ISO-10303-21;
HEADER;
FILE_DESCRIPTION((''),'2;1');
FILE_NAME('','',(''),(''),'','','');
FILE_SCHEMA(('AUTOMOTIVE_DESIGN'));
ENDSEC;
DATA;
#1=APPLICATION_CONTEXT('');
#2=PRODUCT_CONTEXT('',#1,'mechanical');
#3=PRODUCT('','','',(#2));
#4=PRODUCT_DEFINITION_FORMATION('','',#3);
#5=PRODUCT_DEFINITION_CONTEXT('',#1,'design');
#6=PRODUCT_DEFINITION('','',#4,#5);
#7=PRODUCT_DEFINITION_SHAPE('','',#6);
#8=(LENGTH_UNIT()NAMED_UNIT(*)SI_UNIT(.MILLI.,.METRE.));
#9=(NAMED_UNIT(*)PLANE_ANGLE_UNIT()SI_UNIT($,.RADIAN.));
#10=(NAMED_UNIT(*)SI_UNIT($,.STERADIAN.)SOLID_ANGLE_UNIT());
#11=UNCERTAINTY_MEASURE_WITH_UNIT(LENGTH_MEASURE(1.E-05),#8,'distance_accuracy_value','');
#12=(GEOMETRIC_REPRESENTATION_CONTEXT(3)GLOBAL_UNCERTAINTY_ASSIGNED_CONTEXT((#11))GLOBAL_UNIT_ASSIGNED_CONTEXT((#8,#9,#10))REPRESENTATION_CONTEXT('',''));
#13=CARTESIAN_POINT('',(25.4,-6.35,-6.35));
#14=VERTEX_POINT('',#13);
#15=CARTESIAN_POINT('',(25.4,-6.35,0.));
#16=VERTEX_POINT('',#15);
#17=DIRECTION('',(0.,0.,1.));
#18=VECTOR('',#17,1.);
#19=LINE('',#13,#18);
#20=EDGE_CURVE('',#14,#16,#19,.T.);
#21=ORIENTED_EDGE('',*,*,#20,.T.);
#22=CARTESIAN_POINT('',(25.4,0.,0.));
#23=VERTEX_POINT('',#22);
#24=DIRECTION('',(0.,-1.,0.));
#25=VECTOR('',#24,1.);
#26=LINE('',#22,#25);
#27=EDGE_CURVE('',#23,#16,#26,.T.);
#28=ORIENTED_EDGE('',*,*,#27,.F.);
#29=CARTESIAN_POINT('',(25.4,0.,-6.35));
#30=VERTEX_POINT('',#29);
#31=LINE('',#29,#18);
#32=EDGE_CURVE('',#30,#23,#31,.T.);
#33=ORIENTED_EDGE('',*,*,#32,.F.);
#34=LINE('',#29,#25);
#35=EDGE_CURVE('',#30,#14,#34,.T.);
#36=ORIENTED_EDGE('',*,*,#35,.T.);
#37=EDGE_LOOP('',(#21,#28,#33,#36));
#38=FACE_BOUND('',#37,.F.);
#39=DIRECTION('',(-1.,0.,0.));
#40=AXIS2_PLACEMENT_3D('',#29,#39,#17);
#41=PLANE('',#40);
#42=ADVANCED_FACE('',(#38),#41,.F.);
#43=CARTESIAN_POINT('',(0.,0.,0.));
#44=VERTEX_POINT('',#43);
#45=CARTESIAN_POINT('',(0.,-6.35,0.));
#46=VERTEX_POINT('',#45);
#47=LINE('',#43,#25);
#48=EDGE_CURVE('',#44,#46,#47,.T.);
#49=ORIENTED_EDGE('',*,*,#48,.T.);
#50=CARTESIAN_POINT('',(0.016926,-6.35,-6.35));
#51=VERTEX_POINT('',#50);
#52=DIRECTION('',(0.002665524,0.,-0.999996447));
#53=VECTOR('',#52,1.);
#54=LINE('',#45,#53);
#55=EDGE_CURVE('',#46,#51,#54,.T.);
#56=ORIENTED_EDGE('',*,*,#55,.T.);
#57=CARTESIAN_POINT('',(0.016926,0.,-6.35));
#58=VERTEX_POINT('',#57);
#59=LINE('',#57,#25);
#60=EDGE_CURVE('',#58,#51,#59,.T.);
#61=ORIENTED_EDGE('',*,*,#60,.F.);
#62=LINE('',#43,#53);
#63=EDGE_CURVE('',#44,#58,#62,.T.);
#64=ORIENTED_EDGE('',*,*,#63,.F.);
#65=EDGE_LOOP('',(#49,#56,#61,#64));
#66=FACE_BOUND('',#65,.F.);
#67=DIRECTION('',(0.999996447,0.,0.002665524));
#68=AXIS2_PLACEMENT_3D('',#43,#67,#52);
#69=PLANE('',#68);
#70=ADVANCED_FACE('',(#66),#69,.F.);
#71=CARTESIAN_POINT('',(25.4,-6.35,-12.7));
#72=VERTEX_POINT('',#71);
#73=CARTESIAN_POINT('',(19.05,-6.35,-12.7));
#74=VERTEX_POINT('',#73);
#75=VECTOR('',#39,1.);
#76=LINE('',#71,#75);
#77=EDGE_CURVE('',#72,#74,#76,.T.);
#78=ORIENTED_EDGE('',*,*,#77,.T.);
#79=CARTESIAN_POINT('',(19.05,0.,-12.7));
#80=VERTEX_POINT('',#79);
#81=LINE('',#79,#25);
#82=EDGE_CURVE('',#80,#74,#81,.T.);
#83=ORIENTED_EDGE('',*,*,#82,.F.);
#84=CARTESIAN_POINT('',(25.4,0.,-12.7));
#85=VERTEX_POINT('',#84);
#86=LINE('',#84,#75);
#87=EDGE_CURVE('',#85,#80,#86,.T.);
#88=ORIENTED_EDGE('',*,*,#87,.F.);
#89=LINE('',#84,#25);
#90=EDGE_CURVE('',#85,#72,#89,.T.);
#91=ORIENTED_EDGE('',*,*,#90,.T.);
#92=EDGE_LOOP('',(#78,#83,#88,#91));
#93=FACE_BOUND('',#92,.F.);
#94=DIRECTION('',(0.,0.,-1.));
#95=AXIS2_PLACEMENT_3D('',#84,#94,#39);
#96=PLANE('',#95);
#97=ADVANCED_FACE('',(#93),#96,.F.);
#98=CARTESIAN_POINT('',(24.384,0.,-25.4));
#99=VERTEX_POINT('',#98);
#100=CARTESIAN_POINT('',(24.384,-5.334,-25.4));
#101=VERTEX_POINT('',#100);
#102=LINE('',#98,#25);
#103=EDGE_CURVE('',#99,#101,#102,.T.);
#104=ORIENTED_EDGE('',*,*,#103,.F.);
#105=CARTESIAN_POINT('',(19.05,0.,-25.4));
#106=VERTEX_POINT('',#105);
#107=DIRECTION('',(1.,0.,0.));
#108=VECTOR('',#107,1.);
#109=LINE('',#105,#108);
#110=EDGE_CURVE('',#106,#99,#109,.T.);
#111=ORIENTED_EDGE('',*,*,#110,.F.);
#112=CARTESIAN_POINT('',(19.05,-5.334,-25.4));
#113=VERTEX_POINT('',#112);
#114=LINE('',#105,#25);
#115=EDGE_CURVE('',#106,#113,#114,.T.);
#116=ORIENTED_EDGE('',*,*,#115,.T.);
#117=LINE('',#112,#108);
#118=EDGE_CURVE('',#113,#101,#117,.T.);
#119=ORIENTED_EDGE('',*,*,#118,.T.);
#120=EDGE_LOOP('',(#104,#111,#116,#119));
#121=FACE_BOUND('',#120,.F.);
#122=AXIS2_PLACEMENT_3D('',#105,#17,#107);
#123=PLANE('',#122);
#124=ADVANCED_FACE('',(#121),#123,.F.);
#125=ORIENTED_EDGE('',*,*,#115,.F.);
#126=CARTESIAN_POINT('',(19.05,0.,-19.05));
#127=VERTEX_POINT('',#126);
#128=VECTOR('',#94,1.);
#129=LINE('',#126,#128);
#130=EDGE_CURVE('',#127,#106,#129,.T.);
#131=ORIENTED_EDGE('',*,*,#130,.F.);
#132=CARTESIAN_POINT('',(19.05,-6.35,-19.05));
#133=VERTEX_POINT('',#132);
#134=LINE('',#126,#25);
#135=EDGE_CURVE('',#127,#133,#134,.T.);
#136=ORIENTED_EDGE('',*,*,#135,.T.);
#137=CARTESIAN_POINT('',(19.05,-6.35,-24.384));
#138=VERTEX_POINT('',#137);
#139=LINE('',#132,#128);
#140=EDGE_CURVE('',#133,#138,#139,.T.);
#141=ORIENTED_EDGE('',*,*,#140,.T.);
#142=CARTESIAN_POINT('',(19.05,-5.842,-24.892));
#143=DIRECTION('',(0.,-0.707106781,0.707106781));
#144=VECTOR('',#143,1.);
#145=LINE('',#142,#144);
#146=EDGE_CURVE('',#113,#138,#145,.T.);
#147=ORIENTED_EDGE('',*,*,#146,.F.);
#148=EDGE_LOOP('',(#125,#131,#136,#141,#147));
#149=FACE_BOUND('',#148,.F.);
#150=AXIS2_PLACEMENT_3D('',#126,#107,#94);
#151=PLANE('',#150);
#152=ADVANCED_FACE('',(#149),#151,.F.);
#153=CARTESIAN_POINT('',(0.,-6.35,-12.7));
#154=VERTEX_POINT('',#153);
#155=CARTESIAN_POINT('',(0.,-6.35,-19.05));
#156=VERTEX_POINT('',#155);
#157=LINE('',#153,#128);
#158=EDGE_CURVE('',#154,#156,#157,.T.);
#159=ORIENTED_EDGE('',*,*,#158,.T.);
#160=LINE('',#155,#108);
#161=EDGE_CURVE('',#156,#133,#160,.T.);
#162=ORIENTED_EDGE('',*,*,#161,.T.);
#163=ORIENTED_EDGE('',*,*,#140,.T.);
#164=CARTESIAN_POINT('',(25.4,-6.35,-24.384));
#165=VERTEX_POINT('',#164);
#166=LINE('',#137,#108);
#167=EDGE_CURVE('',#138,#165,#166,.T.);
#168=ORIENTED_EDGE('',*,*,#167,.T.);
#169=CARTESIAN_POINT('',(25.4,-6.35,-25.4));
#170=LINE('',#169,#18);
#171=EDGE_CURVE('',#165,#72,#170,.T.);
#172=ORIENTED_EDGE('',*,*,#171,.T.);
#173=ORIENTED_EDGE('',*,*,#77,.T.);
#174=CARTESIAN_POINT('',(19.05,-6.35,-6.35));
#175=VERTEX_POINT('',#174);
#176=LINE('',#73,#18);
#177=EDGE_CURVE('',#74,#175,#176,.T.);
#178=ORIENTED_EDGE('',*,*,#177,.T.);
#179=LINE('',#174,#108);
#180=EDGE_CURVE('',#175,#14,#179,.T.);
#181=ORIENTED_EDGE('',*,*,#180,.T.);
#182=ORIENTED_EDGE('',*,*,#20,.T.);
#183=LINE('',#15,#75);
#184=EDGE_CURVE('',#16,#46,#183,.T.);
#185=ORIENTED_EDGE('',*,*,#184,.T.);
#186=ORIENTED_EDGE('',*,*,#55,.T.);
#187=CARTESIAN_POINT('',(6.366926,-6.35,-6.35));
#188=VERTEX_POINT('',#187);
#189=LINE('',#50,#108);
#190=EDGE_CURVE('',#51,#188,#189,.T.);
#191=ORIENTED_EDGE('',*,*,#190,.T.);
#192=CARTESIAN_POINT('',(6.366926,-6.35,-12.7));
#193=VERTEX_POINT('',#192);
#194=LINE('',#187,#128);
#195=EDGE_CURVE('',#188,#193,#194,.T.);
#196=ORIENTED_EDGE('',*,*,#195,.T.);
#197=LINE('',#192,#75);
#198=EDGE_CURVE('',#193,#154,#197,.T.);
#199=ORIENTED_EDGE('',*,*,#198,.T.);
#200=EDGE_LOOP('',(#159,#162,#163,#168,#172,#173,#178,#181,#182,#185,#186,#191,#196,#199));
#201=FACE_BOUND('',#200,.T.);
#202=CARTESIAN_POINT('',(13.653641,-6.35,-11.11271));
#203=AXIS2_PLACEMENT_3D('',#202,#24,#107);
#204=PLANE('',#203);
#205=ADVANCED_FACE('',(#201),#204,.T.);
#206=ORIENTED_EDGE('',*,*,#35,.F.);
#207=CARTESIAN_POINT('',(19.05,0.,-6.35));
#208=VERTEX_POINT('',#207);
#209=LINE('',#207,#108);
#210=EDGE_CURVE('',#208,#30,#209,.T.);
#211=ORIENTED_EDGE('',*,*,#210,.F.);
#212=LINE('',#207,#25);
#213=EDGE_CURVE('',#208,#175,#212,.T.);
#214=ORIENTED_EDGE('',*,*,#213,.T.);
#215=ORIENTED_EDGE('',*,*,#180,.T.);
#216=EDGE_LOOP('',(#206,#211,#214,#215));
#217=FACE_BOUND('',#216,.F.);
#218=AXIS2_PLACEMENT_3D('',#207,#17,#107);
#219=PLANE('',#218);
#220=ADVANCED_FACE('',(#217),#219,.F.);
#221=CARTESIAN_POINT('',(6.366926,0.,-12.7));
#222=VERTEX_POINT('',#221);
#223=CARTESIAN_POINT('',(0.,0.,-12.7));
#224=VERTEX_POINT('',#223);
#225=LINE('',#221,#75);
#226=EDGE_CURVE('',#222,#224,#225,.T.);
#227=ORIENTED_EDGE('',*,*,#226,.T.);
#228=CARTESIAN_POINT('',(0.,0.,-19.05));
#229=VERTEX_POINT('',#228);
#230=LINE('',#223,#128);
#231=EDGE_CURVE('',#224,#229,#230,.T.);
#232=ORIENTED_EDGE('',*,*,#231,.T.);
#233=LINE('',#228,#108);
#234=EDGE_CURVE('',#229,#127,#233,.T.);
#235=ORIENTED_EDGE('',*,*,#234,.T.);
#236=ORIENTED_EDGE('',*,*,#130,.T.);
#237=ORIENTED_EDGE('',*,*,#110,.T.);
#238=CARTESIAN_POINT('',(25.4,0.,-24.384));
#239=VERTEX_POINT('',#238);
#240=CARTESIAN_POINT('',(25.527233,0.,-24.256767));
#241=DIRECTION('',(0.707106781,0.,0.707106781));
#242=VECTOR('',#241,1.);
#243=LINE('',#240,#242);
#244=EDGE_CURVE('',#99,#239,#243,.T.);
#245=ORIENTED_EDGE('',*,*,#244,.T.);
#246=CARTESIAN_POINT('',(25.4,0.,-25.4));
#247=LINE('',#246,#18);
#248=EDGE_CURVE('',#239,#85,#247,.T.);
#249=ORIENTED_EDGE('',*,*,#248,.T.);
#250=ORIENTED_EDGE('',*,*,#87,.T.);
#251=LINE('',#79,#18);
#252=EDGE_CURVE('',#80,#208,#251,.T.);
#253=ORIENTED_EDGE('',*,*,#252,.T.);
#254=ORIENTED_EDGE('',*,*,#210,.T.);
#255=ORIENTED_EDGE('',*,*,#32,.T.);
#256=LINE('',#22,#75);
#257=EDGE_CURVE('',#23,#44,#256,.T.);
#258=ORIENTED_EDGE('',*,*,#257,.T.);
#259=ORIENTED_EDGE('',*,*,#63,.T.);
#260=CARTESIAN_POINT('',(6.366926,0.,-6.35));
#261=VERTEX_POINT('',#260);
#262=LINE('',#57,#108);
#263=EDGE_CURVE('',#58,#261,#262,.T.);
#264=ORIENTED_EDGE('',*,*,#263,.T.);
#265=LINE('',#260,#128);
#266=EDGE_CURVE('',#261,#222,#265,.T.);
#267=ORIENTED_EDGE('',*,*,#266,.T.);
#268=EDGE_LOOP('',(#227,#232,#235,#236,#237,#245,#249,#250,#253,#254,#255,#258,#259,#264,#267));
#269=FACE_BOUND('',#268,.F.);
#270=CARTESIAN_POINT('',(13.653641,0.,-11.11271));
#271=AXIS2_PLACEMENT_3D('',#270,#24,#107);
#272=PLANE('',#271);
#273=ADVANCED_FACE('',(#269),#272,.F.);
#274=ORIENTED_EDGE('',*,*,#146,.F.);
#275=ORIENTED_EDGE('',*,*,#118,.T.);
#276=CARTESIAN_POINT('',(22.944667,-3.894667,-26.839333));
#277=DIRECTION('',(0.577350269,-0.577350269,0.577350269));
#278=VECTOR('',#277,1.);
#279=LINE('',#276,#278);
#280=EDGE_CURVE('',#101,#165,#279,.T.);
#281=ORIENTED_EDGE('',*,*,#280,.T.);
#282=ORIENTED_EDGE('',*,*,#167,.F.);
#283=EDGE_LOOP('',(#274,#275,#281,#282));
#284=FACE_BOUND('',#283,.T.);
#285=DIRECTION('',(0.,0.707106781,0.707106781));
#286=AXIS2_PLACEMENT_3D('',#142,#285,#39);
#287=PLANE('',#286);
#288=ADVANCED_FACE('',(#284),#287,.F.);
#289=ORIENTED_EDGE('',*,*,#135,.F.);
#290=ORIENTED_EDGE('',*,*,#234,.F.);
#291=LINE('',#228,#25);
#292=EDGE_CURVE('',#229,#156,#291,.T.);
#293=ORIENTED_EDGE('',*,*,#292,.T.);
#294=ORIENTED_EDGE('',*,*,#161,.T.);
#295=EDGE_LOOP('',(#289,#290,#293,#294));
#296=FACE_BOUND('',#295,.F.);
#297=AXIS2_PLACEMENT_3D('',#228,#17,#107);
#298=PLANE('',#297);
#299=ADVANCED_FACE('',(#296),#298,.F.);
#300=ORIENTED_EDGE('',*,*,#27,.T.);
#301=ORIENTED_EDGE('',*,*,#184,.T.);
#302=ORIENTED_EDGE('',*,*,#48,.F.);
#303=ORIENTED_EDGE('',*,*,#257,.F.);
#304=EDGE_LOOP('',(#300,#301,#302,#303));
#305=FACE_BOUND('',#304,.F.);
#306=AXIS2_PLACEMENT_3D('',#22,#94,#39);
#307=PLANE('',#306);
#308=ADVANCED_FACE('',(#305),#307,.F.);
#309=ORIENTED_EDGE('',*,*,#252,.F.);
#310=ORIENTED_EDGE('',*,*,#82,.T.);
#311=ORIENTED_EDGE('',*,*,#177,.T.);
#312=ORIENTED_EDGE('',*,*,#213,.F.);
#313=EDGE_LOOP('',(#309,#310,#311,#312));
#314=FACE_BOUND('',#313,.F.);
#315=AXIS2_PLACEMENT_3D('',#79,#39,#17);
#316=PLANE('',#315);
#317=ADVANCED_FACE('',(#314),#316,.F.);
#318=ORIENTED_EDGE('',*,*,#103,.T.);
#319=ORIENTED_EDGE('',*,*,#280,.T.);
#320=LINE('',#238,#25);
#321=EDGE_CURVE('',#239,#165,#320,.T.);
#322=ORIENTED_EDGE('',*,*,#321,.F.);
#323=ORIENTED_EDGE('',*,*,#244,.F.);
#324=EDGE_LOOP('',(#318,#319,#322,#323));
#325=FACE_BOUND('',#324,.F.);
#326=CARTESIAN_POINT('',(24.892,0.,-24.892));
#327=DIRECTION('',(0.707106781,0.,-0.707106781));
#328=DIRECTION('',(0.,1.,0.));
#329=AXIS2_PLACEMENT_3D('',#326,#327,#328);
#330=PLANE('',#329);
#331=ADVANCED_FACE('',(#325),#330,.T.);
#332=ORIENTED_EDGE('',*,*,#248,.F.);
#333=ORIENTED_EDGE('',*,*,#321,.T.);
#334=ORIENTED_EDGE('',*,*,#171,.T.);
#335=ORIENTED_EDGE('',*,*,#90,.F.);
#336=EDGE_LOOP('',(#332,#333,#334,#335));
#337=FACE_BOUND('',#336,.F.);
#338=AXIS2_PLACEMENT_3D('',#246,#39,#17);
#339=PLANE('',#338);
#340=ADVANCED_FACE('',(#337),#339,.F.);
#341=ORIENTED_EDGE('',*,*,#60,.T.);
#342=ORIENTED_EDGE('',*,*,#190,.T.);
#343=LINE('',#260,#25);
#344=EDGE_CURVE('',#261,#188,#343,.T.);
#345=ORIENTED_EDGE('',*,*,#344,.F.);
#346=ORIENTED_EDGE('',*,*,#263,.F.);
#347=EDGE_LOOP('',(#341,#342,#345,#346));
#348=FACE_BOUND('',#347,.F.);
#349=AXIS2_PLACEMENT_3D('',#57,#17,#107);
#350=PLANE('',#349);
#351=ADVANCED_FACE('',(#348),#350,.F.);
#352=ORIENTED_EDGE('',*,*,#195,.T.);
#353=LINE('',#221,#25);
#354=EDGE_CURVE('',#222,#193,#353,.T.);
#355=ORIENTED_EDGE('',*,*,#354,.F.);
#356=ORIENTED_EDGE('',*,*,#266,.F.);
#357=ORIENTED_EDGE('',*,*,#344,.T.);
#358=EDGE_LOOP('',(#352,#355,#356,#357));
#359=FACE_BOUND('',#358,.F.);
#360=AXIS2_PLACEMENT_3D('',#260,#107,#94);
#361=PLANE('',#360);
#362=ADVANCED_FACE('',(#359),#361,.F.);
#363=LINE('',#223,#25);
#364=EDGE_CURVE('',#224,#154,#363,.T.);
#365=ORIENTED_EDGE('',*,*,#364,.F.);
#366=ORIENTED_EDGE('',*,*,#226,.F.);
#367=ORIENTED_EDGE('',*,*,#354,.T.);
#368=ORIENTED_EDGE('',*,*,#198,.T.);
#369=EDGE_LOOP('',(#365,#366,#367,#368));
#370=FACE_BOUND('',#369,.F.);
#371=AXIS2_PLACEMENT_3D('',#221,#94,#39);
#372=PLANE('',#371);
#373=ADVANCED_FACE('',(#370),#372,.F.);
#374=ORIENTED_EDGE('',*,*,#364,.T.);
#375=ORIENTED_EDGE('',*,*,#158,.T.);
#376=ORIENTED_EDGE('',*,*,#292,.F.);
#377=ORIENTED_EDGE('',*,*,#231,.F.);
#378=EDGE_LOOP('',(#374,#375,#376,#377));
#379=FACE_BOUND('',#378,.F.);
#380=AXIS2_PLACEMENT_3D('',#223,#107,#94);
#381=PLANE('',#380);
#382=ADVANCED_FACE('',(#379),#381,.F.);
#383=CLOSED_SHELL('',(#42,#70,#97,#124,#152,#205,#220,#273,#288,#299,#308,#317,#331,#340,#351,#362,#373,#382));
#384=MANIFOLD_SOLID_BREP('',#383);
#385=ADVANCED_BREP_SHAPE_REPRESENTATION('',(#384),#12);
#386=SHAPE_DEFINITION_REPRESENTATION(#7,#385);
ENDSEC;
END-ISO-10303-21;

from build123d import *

# Parameters (mm, degrees)
F1_DEPTH = 6.35
F2_SIZE  = 1.016
F3_SIZE  = 1.016


# Not quite as in the source:
# - a feature of the source that left no trace in its solid (it failed there, or was rolled back) is left out


with BuildPart() as f1:
    # F0 (on Front) → F1 (new body)
    with BuildSketch(Plane.XZ):
        Polygon((25.4, 0), (0, 0), (0.0169261405, -6.35), (6.3669261405, -6.35), (6.3669261405, -12.7), (0, -12.7), (0, -19.05), (19.05, -19.05), (19.05, -25.4), (25.4, -25.4), (25.4, -12.7), (19.05, -12.7), (19.05, -6.35), (25.4, -6.35), align=None)
    extrude(amount=F1_DEPTH)

    # F2
    f2_edges = [f1.edges().sort_by_distance(p)[0] for p in [
        (22.225, -6.35, -25.4),
    ]]
    chamfer(f2_edges, length=F2_SIZE)

    # F3
    f3_edges = [f1.edges().sort_by_distance(p)[0] for p in [
        (25.4, -2.667, -25.4),
    ]]
    chamfer(f3_edges, length=F3_SIZE)


solid = f1.part
